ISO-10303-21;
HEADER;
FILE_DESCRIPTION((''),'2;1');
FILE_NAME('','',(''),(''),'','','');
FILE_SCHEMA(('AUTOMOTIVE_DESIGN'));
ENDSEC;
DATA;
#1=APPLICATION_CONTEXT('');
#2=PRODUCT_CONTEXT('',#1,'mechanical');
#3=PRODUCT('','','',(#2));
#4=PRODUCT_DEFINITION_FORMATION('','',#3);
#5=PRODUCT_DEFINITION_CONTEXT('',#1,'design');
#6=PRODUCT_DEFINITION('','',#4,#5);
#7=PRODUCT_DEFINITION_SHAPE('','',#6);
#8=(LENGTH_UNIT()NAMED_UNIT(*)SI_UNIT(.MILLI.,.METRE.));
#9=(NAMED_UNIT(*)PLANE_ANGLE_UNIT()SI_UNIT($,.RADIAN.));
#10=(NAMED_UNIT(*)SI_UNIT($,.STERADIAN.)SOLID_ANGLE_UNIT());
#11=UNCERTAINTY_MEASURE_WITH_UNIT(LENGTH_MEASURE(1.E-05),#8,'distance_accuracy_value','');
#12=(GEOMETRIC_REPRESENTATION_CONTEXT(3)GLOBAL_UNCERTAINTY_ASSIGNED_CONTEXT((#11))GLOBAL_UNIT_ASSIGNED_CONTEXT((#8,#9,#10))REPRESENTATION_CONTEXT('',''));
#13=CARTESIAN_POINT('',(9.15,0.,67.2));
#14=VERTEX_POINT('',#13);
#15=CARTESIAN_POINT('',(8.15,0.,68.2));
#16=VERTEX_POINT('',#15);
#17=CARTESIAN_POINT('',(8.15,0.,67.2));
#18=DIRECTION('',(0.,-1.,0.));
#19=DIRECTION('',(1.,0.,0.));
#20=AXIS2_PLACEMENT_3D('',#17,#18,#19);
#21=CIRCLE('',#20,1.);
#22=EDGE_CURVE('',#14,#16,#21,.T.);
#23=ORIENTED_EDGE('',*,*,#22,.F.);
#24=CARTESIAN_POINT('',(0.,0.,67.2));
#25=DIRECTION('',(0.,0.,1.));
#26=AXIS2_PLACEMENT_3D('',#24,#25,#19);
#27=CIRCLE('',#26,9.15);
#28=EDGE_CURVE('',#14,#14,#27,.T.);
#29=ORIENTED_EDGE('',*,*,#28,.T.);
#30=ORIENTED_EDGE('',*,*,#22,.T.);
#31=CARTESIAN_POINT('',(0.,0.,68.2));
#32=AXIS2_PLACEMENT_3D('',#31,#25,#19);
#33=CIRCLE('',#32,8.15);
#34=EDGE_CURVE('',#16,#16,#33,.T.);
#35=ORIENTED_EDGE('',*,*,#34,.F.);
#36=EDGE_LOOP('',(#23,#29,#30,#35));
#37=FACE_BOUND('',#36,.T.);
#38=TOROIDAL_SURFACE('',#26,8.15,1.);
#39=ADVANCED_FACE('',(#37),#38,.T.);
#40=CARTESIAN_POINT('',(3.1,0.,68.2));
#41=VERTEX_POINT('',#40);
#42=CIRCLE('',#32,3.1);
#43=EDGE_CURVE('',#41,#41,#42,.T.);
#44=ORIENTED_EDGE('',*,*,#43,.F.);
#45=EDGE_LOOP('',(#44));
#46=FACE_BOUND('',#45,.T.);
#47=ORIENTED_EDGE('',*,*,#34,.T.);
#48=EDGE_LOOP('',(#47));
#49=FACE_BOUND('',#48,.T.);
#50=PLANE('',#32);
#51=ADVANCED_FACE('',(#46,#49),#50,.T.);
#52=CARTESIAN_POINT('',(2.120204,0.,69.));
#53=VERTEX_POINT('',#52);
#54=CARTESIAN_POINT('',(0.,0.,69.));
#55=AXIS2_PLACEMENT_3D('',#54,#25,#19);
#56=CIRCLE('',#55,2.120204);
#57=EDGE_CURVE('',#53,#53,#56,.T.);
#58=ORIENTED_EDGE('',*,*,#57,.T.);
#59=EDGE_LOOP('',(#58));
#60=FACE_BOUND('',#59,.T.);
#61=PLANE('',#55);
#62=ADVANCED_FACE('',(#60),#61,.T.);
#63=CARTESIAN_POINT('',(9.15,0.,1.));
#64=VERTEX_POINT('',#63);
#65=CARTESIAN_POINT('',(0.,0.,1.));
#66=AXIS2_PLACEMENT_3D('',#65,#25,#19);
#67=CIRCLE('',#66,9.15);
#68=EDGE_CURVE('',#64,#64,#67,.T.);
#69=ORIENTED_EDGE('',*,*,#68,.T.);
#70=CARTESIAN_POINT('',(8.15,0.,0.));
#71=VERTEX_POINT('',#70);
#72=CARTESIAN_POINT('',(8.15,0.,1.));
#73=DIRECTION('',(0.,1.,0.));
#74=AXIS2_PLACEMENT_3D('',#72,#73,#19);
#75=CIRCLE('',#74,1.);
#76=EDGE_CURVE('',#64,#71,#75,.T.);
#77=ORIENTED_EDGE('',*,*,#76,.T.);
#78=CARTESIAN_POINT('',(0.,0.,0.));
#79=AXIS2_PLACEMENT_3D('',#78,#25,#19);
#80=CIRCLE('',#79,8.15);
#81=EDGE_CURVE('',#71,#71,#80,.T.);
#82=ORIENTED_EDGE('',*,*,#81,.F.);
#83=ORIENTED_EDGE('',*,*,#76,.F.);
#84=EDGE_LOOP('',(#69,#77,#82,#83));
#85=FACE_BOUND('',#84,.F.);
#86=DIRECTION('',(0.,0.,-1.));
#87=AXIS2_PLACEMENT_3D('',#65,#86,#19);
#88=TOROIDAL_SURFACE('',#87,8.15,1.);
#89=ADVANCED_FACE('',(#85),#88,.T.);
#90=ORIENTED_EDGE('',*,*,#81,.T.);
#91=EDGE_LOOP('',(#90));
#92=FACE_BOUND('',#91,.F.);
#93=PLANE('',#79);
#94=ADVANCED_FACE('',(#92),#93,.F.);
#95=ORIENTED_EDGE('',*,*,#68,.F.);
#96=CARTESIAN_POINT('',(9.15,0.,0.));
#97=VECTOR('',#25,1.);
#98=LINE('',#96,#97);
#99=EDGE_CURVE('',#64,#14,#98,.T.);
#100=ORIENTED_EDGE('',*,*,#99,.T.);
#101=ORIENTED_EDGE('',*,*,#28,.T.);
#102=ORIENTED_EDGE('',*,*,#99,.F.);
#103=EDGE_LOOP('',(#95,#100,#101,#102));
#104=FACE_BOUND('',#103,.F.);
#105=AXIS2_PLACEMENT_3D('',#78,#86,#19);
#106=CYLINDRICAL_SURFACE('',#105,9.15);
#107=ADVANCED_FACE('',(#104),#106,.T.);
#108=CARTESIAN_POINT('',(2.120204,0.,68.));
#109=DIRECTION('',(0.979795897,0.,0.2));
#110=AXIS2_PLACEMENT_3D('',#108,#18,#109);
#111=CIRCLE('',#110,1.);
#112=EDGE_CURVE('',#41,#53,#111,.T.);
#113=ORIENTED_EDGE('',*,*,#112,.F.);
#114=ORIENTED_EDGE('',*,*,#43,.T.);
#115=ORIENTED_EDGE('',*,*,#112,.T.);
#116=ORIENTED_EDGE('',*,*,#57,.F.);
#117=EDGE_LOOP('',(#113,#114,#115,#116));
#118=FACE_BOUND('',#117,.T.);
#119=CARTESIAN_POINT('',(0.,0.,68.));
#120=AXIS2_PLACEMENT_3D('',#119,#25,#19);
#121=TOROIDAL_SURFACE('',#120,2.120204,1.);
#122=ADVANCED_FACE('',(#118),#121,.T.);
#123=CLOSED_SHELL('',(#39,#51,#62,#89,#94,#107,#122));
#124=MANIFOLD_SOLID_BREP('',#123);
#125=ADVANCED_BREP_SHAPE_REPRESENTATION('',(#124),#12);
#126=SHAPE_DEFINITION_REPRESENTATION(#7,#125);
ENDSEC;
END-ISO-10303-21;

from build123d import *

# Parameters (mm, degrees)
F0_R     = 9.15
F0_R_2   = 3.1
F1_DEPTH = 68.2
F2_DEPTH = 69


# Not quite as in the source:
# - a fillet or chamfer that OpenCascade refuses, or shapes differently, is made with other operations: its cross-section is extruded or revolved along the edge and cut away or added


with BuildPart() as f1:
    # F0 (on Top) → F1 (new body)
    with BuildSketch(Plane.XY):
        Circle(F0_R)
        Circle(F0_R_2, mode=Mode.SUBTRACT)
    extrude(amount=F1_DEPTH)

    # F0 (on Top) → F2 (join)
    with BuildSketch(Plane.XY):
        Circle(F0_R_2)
    extrude(amount=F2_DEPTH)

    # F3: fillet of radius 1 on 3 edges, made by hand

    # F3_s1 → F3_t2 (revolve, cut)
    with BuildSketch(Plane.XZ):
        with BuildLine():
            ThreePointArc((3.1, 68.2), (2.7526596349, 68.7745966692), (2.1202041029, 69))
            Line((2.1202041029, 69), (3.1, 69))
            Line((3.1, 69), (3.1, 68.2))
        make_face()
    revolve(axis=Axis((0, 0, 69), (0, 0, 1)), mode=Mode.SUBTRACT)

    # F3_s3 → F3_t4 (revolve, cut)
    with BuildSketch(Plane.XZ):
        with BuildLine():
            ThreePointArc((9.15, 67.2), (8.8571067812, 67.9071067812), (8.15, 68.2))
            Line((8.15, 68.2), (9.15, 68.2))
            Line((9.15, 68.2), (9.15, 67.2))
        make_face()
    revolve(axis=Axis((0, 0, 68.2), (0, 0, 1)), mode=Mode.SUBTRACT)

    # F3_s5 → F3_t6 (revolve, cut)
    with BuildSketch(Plane.XZ):
        with BuildLine():
            ThreePointArc((9.15, 1), (8.8571067812, 0.2928932188), (8.15, 0))
            Line((8.15, 0), (9.15, 0))
            Line((9.15, 0), (9.15, 1))
        make_face()
    revolve(axis=Axis((0, 0, 0), (0, 0, 1)), mode=Mode.SUBTRACT)


solid = f1.part
